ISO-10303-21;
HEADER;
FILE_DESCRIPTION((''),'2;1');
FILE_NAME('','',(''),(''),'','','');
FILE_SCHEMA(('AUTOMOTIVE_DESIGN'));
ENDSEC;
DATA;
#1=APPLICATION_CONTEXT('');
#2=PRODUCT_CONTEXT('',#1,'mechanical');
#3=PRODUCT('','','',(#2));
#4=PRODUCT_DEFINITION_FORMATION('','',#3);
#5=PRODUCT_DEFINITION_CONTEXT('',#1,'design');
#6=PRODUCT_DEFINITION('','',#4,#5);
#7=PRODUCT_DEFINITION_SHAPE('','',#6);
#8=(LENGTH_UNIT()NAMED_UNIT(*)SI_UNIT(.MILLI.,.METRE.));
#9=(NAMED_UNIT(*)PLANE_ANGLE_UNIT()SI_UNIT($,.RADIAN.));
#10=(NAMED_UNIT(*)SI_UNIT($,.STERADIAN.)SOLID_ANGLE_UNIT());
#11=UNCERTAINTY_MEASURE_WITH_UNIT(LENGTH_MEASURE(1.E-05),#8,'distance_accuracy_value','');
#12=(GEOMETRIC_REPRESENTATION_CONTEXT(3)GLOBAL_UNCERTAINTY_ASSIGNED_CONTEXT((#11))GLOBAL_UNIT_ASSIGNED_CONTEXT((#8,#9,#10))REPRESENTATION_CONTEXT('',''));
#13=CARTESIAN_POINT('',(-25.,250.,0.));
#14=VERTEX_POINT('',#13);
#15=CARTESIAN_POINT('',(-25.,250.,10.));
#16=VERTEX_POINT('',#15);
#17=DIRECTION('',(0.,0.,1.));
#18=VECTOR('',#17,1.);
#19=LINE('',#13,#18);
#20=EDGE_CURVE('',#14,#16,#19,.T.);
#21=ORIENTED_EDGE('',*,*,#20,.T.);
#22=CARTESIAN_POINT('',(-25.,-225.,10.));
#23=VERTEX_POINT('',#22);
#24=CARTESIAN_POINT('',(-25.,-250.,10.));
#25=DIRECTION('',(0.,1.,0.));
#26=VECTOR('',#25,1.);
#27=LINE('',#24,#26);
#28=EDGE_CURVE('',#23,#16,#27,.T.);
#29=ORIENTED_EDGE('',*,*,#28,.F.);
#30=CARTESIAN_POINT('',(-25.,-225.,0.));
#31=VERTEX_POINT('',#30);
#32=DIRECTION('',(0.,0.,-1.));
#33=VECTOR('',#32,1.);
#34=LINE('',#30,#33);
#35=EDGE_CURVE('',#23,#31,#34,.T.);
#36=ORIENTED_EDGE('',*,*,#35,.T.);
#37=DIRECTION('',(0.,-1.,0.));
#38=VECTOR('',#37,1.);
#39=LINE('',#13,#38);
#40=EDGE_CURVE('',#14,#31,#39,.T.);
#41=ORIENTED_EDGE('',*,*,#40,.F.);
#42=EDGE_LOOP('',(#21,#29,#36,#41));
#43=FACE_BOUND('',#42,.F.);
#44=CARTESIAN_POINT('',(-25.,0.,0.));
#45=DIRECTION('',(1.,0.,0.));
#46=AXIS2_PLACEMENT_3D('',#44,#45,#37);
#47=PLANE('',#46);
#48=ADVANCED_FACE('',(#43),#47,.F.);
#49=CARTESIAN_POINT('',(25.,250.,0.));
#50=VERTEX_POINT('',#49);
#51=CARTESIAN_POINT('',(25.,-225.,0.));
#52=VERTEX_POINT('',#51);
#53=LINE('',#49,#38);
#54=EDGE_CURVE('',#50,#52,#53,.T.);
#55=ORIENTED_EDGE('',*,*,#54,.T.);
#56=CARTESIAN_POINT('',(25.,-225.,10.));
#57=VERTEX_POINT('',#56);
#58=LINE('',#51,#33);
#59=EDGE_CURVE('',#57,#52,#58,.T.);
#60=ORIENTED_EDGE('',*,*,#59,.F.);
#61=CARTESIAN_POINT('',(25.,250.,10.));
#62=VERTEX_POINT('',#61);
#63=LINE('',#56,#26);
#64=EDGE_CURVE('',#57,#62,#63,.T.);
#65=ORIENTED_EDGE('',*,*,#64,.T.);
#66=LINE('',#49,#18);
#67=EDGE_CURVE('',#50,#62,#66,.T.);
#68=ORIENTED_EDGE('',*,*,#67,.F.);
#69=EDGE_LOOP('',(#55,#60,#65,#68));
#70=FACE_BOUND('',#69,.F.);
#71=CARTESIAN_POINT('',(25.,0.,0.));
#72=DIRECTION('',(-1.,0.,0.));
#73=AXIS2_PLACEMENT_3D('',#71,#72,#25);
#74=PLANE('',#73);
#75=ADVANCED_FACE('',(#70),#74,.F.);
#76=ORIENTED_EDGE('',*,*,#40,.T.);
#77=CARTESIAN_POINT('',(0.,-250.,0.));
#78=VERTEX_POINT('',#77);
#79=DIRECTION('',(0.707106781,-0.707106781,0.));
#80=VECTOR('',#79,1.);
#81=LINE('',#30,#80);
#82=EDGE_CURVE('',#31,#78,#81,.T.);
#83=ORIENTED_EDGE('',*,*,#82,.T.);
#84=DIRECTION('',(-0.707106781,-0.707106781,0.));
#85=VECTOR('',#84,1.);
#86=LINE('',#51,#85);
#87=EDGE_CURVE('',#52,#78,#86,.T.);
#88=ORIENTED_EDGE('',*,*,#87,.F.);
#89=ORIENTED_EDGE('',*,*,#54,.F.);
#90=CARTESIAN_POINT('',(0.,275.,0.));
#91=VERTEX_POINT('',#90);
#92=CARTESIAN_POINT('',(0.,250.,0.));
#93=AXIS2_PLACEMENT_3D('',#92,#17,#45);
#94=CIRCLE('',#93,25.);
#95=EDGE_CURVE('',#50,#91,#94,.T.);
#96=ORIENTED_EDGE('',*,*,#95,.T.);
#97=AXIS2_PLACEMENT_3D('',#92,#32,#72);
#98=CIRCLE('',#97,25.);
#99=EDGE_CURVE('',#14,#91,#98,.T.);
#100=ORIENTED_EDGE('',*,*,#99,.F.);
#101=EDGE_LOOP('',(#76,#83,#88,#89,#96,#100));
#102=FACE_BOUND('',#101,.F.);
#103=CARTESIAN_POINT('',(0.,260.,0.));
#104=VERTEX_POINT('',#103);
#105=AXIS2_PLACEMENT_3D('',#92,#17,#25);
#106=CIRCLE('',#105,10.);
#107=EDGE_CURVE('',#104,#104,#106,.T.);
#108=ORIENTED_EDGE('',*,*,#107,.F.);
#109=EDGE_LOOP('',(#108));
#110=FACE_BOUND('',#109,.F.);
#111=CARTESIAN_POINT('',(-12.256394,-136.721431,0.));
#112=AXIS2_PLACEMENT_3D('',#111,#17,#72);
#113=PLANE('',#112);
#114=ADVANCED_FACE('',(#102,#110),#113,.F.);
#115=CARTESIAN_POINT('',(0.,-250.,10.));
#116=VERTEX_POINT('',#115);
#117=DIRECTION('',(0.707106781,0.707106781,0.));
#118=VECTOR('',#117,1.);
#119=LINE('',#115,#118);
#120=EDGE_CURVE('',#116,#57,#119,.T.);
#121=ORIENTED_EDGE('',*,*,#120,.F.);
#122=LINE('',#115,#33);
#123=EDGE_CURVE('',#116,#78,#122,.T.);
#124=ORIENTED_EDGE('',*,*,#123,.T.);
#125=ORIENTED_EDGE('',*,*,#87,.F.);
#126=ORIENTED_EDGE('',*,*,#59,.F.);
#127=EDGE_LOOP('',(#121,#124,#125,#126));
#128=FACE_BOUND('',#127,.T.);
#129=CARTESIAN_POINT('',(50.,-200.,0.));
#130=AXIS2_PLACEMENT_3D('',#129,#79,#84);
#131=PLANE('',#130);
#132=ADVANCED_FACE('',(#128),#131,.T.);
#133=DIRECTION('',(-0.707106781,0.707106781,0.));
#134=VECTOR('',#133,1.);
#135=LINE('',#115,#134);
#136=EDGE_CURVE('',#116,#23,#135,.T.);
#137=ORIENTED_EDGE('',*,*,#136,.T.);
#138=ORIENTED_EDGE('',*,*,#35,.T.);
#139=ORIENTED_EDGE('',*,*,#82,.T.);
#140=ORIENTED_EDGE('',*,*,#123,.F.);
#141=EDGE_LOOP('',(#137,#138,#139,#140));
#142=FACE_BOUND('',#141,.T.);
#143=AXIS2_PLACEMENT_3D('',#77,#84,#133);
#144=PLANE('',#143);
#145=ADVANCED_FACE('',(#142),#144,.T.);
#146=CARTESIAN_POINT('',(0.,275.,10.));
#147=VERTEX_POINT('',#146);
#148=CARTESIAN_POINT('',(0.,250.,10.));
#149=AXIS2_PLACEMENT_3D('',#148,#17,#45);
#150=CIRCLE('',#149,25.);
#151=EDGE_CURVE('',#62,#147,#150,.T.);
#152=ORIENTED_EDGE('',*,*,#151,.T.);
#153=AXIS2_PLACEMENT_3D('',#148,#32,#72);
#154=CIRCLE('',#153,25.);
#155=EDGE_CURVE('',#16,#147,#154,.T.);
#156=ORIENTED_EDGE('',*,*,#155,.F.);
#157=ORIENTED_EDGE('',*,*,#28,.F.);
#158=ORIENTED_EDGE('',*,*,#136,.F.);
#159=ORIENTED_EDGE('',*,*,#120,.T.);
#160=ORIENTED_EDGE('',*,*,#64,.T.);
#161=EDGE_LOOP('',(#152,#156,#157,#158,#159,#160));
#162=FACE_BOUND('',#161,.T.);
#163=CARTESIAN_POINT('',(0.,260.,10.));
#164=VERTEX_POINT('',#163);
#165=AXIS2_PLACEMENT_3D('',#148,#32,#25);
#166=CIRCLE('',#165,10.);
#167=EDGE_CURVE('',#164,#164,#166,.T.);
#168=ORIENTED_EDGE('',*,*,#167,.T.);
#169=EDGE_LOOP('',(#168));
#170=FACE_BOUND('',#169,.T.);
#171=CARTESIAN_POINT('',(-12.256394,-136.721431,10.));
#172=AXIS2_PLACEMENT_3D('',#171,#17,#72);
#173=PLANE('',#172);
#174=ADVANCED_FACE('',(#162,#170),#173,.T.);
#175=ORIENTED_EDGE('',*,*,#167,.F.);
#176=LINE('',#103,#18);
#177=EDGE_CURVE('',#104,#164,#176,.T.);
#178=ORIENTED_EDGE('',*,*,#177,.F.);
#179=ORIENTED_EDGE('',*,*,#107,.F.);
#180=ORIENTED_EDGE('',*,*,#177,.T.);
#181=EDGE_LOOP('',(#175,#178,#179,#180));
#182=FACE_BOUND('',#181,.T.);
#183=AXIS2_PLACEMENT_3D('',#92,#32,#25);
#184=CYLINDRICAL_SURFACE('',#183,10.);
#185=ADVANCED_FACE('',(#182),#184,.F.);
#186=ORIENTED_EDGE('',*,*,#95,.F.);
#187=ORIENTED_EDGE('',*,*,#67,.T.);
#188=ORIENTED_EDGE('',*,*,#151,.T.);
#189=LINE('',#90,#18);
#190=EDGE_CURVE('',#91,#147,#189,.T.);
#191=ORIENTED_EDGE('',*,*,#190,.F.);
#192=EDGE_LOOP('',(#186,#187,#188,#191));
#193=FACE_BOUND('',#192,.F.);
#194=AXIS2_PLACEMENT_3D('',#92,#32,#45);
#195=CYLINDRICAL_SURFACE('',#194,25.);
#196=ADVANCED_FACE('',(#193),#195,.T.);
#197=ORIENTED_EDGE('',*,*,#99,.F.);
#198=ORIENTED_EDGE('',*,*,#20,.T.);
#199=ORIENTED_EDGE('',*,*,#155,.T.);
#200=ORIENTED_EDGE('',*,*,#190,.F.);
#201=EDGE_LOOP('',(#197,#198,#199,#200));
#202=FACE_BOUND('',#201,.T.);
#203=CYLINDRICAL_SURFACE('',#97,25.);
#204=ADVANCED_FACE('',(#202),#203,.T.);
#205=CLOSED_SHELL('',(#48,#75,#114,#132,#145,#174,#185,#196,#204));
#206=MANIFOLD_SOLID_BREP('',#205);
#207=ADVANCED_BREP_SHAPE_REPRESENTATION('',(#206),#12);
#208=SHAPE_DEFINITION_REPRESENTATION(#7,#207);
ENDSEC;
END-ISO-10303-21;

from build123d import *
from build123d import SkipClean  # not in build123d's __all__

# Parameters (mm, degrees)
F1_DEPTH = 10
F5_DEPTH = 10.001
F7_DEPTH = 10


with BuildPart() as f1:
    # F0 (on Top) → F1 (new body)
    with BuildSketch(Plane.XY):
        with BuildLine():
            Line((0, 240), (0, 0))
            Line((0, 0), (25, 0))
            Line((25, 0), (25, 250))
            ThreePointArc((25, 250), (17.6776695297, 267.6776695297), (0, 275))
            Line((0, 275), (0, 260))
            ThreePointArc((0, 260), (10, 250), (0, 240))
        make_face()
    extrude(amount=F1_DEPTH)

    # F2: F1 across face


with BuildPart() as f1_1:
    add(f1.part, clean=False)
    with SkipClean():  # cleaning this boolean's faces spoils the solid; the shape is the same uncleaned
        add(f1.part.mirror(Plane(origin=(0, 120, 5), x_dir=(0, -1, 0), z_dir=(-1, 0, 0))), clean=False)

    # F3: F1 across face


with BuildPart() as f1_2:
    add(f1_1.part, clean=False)
    add(f1_1.part.mirror(Plane(origin=(12.5, 0, 5), x_dir=(1, 0, 0), z_dir=(0, -1, 0))), clean=False)

    # F4 (on Top) → F5 (cut, through all)
    with BuildSketch(Plane.XY):
        Polygon((50, -200), (0, -250), (-50, -200), (-50, -344.7760872496), (50, -344.7760872496), align=None)
    extrude(amount=F5_DEPTH, mode=Mode.SUBTRACT)

    # F6 (on face) → F7 (join, through all)
    with BuildSketch(Plane.XY.offset(10)):
        Polygon((11.9149819948, -238.0850180052), (-11.0190114938, -238.9809885062), (0, -250), align=None)
    extrude(amount=-F7_DEPTH)


solid = f1_2.part
